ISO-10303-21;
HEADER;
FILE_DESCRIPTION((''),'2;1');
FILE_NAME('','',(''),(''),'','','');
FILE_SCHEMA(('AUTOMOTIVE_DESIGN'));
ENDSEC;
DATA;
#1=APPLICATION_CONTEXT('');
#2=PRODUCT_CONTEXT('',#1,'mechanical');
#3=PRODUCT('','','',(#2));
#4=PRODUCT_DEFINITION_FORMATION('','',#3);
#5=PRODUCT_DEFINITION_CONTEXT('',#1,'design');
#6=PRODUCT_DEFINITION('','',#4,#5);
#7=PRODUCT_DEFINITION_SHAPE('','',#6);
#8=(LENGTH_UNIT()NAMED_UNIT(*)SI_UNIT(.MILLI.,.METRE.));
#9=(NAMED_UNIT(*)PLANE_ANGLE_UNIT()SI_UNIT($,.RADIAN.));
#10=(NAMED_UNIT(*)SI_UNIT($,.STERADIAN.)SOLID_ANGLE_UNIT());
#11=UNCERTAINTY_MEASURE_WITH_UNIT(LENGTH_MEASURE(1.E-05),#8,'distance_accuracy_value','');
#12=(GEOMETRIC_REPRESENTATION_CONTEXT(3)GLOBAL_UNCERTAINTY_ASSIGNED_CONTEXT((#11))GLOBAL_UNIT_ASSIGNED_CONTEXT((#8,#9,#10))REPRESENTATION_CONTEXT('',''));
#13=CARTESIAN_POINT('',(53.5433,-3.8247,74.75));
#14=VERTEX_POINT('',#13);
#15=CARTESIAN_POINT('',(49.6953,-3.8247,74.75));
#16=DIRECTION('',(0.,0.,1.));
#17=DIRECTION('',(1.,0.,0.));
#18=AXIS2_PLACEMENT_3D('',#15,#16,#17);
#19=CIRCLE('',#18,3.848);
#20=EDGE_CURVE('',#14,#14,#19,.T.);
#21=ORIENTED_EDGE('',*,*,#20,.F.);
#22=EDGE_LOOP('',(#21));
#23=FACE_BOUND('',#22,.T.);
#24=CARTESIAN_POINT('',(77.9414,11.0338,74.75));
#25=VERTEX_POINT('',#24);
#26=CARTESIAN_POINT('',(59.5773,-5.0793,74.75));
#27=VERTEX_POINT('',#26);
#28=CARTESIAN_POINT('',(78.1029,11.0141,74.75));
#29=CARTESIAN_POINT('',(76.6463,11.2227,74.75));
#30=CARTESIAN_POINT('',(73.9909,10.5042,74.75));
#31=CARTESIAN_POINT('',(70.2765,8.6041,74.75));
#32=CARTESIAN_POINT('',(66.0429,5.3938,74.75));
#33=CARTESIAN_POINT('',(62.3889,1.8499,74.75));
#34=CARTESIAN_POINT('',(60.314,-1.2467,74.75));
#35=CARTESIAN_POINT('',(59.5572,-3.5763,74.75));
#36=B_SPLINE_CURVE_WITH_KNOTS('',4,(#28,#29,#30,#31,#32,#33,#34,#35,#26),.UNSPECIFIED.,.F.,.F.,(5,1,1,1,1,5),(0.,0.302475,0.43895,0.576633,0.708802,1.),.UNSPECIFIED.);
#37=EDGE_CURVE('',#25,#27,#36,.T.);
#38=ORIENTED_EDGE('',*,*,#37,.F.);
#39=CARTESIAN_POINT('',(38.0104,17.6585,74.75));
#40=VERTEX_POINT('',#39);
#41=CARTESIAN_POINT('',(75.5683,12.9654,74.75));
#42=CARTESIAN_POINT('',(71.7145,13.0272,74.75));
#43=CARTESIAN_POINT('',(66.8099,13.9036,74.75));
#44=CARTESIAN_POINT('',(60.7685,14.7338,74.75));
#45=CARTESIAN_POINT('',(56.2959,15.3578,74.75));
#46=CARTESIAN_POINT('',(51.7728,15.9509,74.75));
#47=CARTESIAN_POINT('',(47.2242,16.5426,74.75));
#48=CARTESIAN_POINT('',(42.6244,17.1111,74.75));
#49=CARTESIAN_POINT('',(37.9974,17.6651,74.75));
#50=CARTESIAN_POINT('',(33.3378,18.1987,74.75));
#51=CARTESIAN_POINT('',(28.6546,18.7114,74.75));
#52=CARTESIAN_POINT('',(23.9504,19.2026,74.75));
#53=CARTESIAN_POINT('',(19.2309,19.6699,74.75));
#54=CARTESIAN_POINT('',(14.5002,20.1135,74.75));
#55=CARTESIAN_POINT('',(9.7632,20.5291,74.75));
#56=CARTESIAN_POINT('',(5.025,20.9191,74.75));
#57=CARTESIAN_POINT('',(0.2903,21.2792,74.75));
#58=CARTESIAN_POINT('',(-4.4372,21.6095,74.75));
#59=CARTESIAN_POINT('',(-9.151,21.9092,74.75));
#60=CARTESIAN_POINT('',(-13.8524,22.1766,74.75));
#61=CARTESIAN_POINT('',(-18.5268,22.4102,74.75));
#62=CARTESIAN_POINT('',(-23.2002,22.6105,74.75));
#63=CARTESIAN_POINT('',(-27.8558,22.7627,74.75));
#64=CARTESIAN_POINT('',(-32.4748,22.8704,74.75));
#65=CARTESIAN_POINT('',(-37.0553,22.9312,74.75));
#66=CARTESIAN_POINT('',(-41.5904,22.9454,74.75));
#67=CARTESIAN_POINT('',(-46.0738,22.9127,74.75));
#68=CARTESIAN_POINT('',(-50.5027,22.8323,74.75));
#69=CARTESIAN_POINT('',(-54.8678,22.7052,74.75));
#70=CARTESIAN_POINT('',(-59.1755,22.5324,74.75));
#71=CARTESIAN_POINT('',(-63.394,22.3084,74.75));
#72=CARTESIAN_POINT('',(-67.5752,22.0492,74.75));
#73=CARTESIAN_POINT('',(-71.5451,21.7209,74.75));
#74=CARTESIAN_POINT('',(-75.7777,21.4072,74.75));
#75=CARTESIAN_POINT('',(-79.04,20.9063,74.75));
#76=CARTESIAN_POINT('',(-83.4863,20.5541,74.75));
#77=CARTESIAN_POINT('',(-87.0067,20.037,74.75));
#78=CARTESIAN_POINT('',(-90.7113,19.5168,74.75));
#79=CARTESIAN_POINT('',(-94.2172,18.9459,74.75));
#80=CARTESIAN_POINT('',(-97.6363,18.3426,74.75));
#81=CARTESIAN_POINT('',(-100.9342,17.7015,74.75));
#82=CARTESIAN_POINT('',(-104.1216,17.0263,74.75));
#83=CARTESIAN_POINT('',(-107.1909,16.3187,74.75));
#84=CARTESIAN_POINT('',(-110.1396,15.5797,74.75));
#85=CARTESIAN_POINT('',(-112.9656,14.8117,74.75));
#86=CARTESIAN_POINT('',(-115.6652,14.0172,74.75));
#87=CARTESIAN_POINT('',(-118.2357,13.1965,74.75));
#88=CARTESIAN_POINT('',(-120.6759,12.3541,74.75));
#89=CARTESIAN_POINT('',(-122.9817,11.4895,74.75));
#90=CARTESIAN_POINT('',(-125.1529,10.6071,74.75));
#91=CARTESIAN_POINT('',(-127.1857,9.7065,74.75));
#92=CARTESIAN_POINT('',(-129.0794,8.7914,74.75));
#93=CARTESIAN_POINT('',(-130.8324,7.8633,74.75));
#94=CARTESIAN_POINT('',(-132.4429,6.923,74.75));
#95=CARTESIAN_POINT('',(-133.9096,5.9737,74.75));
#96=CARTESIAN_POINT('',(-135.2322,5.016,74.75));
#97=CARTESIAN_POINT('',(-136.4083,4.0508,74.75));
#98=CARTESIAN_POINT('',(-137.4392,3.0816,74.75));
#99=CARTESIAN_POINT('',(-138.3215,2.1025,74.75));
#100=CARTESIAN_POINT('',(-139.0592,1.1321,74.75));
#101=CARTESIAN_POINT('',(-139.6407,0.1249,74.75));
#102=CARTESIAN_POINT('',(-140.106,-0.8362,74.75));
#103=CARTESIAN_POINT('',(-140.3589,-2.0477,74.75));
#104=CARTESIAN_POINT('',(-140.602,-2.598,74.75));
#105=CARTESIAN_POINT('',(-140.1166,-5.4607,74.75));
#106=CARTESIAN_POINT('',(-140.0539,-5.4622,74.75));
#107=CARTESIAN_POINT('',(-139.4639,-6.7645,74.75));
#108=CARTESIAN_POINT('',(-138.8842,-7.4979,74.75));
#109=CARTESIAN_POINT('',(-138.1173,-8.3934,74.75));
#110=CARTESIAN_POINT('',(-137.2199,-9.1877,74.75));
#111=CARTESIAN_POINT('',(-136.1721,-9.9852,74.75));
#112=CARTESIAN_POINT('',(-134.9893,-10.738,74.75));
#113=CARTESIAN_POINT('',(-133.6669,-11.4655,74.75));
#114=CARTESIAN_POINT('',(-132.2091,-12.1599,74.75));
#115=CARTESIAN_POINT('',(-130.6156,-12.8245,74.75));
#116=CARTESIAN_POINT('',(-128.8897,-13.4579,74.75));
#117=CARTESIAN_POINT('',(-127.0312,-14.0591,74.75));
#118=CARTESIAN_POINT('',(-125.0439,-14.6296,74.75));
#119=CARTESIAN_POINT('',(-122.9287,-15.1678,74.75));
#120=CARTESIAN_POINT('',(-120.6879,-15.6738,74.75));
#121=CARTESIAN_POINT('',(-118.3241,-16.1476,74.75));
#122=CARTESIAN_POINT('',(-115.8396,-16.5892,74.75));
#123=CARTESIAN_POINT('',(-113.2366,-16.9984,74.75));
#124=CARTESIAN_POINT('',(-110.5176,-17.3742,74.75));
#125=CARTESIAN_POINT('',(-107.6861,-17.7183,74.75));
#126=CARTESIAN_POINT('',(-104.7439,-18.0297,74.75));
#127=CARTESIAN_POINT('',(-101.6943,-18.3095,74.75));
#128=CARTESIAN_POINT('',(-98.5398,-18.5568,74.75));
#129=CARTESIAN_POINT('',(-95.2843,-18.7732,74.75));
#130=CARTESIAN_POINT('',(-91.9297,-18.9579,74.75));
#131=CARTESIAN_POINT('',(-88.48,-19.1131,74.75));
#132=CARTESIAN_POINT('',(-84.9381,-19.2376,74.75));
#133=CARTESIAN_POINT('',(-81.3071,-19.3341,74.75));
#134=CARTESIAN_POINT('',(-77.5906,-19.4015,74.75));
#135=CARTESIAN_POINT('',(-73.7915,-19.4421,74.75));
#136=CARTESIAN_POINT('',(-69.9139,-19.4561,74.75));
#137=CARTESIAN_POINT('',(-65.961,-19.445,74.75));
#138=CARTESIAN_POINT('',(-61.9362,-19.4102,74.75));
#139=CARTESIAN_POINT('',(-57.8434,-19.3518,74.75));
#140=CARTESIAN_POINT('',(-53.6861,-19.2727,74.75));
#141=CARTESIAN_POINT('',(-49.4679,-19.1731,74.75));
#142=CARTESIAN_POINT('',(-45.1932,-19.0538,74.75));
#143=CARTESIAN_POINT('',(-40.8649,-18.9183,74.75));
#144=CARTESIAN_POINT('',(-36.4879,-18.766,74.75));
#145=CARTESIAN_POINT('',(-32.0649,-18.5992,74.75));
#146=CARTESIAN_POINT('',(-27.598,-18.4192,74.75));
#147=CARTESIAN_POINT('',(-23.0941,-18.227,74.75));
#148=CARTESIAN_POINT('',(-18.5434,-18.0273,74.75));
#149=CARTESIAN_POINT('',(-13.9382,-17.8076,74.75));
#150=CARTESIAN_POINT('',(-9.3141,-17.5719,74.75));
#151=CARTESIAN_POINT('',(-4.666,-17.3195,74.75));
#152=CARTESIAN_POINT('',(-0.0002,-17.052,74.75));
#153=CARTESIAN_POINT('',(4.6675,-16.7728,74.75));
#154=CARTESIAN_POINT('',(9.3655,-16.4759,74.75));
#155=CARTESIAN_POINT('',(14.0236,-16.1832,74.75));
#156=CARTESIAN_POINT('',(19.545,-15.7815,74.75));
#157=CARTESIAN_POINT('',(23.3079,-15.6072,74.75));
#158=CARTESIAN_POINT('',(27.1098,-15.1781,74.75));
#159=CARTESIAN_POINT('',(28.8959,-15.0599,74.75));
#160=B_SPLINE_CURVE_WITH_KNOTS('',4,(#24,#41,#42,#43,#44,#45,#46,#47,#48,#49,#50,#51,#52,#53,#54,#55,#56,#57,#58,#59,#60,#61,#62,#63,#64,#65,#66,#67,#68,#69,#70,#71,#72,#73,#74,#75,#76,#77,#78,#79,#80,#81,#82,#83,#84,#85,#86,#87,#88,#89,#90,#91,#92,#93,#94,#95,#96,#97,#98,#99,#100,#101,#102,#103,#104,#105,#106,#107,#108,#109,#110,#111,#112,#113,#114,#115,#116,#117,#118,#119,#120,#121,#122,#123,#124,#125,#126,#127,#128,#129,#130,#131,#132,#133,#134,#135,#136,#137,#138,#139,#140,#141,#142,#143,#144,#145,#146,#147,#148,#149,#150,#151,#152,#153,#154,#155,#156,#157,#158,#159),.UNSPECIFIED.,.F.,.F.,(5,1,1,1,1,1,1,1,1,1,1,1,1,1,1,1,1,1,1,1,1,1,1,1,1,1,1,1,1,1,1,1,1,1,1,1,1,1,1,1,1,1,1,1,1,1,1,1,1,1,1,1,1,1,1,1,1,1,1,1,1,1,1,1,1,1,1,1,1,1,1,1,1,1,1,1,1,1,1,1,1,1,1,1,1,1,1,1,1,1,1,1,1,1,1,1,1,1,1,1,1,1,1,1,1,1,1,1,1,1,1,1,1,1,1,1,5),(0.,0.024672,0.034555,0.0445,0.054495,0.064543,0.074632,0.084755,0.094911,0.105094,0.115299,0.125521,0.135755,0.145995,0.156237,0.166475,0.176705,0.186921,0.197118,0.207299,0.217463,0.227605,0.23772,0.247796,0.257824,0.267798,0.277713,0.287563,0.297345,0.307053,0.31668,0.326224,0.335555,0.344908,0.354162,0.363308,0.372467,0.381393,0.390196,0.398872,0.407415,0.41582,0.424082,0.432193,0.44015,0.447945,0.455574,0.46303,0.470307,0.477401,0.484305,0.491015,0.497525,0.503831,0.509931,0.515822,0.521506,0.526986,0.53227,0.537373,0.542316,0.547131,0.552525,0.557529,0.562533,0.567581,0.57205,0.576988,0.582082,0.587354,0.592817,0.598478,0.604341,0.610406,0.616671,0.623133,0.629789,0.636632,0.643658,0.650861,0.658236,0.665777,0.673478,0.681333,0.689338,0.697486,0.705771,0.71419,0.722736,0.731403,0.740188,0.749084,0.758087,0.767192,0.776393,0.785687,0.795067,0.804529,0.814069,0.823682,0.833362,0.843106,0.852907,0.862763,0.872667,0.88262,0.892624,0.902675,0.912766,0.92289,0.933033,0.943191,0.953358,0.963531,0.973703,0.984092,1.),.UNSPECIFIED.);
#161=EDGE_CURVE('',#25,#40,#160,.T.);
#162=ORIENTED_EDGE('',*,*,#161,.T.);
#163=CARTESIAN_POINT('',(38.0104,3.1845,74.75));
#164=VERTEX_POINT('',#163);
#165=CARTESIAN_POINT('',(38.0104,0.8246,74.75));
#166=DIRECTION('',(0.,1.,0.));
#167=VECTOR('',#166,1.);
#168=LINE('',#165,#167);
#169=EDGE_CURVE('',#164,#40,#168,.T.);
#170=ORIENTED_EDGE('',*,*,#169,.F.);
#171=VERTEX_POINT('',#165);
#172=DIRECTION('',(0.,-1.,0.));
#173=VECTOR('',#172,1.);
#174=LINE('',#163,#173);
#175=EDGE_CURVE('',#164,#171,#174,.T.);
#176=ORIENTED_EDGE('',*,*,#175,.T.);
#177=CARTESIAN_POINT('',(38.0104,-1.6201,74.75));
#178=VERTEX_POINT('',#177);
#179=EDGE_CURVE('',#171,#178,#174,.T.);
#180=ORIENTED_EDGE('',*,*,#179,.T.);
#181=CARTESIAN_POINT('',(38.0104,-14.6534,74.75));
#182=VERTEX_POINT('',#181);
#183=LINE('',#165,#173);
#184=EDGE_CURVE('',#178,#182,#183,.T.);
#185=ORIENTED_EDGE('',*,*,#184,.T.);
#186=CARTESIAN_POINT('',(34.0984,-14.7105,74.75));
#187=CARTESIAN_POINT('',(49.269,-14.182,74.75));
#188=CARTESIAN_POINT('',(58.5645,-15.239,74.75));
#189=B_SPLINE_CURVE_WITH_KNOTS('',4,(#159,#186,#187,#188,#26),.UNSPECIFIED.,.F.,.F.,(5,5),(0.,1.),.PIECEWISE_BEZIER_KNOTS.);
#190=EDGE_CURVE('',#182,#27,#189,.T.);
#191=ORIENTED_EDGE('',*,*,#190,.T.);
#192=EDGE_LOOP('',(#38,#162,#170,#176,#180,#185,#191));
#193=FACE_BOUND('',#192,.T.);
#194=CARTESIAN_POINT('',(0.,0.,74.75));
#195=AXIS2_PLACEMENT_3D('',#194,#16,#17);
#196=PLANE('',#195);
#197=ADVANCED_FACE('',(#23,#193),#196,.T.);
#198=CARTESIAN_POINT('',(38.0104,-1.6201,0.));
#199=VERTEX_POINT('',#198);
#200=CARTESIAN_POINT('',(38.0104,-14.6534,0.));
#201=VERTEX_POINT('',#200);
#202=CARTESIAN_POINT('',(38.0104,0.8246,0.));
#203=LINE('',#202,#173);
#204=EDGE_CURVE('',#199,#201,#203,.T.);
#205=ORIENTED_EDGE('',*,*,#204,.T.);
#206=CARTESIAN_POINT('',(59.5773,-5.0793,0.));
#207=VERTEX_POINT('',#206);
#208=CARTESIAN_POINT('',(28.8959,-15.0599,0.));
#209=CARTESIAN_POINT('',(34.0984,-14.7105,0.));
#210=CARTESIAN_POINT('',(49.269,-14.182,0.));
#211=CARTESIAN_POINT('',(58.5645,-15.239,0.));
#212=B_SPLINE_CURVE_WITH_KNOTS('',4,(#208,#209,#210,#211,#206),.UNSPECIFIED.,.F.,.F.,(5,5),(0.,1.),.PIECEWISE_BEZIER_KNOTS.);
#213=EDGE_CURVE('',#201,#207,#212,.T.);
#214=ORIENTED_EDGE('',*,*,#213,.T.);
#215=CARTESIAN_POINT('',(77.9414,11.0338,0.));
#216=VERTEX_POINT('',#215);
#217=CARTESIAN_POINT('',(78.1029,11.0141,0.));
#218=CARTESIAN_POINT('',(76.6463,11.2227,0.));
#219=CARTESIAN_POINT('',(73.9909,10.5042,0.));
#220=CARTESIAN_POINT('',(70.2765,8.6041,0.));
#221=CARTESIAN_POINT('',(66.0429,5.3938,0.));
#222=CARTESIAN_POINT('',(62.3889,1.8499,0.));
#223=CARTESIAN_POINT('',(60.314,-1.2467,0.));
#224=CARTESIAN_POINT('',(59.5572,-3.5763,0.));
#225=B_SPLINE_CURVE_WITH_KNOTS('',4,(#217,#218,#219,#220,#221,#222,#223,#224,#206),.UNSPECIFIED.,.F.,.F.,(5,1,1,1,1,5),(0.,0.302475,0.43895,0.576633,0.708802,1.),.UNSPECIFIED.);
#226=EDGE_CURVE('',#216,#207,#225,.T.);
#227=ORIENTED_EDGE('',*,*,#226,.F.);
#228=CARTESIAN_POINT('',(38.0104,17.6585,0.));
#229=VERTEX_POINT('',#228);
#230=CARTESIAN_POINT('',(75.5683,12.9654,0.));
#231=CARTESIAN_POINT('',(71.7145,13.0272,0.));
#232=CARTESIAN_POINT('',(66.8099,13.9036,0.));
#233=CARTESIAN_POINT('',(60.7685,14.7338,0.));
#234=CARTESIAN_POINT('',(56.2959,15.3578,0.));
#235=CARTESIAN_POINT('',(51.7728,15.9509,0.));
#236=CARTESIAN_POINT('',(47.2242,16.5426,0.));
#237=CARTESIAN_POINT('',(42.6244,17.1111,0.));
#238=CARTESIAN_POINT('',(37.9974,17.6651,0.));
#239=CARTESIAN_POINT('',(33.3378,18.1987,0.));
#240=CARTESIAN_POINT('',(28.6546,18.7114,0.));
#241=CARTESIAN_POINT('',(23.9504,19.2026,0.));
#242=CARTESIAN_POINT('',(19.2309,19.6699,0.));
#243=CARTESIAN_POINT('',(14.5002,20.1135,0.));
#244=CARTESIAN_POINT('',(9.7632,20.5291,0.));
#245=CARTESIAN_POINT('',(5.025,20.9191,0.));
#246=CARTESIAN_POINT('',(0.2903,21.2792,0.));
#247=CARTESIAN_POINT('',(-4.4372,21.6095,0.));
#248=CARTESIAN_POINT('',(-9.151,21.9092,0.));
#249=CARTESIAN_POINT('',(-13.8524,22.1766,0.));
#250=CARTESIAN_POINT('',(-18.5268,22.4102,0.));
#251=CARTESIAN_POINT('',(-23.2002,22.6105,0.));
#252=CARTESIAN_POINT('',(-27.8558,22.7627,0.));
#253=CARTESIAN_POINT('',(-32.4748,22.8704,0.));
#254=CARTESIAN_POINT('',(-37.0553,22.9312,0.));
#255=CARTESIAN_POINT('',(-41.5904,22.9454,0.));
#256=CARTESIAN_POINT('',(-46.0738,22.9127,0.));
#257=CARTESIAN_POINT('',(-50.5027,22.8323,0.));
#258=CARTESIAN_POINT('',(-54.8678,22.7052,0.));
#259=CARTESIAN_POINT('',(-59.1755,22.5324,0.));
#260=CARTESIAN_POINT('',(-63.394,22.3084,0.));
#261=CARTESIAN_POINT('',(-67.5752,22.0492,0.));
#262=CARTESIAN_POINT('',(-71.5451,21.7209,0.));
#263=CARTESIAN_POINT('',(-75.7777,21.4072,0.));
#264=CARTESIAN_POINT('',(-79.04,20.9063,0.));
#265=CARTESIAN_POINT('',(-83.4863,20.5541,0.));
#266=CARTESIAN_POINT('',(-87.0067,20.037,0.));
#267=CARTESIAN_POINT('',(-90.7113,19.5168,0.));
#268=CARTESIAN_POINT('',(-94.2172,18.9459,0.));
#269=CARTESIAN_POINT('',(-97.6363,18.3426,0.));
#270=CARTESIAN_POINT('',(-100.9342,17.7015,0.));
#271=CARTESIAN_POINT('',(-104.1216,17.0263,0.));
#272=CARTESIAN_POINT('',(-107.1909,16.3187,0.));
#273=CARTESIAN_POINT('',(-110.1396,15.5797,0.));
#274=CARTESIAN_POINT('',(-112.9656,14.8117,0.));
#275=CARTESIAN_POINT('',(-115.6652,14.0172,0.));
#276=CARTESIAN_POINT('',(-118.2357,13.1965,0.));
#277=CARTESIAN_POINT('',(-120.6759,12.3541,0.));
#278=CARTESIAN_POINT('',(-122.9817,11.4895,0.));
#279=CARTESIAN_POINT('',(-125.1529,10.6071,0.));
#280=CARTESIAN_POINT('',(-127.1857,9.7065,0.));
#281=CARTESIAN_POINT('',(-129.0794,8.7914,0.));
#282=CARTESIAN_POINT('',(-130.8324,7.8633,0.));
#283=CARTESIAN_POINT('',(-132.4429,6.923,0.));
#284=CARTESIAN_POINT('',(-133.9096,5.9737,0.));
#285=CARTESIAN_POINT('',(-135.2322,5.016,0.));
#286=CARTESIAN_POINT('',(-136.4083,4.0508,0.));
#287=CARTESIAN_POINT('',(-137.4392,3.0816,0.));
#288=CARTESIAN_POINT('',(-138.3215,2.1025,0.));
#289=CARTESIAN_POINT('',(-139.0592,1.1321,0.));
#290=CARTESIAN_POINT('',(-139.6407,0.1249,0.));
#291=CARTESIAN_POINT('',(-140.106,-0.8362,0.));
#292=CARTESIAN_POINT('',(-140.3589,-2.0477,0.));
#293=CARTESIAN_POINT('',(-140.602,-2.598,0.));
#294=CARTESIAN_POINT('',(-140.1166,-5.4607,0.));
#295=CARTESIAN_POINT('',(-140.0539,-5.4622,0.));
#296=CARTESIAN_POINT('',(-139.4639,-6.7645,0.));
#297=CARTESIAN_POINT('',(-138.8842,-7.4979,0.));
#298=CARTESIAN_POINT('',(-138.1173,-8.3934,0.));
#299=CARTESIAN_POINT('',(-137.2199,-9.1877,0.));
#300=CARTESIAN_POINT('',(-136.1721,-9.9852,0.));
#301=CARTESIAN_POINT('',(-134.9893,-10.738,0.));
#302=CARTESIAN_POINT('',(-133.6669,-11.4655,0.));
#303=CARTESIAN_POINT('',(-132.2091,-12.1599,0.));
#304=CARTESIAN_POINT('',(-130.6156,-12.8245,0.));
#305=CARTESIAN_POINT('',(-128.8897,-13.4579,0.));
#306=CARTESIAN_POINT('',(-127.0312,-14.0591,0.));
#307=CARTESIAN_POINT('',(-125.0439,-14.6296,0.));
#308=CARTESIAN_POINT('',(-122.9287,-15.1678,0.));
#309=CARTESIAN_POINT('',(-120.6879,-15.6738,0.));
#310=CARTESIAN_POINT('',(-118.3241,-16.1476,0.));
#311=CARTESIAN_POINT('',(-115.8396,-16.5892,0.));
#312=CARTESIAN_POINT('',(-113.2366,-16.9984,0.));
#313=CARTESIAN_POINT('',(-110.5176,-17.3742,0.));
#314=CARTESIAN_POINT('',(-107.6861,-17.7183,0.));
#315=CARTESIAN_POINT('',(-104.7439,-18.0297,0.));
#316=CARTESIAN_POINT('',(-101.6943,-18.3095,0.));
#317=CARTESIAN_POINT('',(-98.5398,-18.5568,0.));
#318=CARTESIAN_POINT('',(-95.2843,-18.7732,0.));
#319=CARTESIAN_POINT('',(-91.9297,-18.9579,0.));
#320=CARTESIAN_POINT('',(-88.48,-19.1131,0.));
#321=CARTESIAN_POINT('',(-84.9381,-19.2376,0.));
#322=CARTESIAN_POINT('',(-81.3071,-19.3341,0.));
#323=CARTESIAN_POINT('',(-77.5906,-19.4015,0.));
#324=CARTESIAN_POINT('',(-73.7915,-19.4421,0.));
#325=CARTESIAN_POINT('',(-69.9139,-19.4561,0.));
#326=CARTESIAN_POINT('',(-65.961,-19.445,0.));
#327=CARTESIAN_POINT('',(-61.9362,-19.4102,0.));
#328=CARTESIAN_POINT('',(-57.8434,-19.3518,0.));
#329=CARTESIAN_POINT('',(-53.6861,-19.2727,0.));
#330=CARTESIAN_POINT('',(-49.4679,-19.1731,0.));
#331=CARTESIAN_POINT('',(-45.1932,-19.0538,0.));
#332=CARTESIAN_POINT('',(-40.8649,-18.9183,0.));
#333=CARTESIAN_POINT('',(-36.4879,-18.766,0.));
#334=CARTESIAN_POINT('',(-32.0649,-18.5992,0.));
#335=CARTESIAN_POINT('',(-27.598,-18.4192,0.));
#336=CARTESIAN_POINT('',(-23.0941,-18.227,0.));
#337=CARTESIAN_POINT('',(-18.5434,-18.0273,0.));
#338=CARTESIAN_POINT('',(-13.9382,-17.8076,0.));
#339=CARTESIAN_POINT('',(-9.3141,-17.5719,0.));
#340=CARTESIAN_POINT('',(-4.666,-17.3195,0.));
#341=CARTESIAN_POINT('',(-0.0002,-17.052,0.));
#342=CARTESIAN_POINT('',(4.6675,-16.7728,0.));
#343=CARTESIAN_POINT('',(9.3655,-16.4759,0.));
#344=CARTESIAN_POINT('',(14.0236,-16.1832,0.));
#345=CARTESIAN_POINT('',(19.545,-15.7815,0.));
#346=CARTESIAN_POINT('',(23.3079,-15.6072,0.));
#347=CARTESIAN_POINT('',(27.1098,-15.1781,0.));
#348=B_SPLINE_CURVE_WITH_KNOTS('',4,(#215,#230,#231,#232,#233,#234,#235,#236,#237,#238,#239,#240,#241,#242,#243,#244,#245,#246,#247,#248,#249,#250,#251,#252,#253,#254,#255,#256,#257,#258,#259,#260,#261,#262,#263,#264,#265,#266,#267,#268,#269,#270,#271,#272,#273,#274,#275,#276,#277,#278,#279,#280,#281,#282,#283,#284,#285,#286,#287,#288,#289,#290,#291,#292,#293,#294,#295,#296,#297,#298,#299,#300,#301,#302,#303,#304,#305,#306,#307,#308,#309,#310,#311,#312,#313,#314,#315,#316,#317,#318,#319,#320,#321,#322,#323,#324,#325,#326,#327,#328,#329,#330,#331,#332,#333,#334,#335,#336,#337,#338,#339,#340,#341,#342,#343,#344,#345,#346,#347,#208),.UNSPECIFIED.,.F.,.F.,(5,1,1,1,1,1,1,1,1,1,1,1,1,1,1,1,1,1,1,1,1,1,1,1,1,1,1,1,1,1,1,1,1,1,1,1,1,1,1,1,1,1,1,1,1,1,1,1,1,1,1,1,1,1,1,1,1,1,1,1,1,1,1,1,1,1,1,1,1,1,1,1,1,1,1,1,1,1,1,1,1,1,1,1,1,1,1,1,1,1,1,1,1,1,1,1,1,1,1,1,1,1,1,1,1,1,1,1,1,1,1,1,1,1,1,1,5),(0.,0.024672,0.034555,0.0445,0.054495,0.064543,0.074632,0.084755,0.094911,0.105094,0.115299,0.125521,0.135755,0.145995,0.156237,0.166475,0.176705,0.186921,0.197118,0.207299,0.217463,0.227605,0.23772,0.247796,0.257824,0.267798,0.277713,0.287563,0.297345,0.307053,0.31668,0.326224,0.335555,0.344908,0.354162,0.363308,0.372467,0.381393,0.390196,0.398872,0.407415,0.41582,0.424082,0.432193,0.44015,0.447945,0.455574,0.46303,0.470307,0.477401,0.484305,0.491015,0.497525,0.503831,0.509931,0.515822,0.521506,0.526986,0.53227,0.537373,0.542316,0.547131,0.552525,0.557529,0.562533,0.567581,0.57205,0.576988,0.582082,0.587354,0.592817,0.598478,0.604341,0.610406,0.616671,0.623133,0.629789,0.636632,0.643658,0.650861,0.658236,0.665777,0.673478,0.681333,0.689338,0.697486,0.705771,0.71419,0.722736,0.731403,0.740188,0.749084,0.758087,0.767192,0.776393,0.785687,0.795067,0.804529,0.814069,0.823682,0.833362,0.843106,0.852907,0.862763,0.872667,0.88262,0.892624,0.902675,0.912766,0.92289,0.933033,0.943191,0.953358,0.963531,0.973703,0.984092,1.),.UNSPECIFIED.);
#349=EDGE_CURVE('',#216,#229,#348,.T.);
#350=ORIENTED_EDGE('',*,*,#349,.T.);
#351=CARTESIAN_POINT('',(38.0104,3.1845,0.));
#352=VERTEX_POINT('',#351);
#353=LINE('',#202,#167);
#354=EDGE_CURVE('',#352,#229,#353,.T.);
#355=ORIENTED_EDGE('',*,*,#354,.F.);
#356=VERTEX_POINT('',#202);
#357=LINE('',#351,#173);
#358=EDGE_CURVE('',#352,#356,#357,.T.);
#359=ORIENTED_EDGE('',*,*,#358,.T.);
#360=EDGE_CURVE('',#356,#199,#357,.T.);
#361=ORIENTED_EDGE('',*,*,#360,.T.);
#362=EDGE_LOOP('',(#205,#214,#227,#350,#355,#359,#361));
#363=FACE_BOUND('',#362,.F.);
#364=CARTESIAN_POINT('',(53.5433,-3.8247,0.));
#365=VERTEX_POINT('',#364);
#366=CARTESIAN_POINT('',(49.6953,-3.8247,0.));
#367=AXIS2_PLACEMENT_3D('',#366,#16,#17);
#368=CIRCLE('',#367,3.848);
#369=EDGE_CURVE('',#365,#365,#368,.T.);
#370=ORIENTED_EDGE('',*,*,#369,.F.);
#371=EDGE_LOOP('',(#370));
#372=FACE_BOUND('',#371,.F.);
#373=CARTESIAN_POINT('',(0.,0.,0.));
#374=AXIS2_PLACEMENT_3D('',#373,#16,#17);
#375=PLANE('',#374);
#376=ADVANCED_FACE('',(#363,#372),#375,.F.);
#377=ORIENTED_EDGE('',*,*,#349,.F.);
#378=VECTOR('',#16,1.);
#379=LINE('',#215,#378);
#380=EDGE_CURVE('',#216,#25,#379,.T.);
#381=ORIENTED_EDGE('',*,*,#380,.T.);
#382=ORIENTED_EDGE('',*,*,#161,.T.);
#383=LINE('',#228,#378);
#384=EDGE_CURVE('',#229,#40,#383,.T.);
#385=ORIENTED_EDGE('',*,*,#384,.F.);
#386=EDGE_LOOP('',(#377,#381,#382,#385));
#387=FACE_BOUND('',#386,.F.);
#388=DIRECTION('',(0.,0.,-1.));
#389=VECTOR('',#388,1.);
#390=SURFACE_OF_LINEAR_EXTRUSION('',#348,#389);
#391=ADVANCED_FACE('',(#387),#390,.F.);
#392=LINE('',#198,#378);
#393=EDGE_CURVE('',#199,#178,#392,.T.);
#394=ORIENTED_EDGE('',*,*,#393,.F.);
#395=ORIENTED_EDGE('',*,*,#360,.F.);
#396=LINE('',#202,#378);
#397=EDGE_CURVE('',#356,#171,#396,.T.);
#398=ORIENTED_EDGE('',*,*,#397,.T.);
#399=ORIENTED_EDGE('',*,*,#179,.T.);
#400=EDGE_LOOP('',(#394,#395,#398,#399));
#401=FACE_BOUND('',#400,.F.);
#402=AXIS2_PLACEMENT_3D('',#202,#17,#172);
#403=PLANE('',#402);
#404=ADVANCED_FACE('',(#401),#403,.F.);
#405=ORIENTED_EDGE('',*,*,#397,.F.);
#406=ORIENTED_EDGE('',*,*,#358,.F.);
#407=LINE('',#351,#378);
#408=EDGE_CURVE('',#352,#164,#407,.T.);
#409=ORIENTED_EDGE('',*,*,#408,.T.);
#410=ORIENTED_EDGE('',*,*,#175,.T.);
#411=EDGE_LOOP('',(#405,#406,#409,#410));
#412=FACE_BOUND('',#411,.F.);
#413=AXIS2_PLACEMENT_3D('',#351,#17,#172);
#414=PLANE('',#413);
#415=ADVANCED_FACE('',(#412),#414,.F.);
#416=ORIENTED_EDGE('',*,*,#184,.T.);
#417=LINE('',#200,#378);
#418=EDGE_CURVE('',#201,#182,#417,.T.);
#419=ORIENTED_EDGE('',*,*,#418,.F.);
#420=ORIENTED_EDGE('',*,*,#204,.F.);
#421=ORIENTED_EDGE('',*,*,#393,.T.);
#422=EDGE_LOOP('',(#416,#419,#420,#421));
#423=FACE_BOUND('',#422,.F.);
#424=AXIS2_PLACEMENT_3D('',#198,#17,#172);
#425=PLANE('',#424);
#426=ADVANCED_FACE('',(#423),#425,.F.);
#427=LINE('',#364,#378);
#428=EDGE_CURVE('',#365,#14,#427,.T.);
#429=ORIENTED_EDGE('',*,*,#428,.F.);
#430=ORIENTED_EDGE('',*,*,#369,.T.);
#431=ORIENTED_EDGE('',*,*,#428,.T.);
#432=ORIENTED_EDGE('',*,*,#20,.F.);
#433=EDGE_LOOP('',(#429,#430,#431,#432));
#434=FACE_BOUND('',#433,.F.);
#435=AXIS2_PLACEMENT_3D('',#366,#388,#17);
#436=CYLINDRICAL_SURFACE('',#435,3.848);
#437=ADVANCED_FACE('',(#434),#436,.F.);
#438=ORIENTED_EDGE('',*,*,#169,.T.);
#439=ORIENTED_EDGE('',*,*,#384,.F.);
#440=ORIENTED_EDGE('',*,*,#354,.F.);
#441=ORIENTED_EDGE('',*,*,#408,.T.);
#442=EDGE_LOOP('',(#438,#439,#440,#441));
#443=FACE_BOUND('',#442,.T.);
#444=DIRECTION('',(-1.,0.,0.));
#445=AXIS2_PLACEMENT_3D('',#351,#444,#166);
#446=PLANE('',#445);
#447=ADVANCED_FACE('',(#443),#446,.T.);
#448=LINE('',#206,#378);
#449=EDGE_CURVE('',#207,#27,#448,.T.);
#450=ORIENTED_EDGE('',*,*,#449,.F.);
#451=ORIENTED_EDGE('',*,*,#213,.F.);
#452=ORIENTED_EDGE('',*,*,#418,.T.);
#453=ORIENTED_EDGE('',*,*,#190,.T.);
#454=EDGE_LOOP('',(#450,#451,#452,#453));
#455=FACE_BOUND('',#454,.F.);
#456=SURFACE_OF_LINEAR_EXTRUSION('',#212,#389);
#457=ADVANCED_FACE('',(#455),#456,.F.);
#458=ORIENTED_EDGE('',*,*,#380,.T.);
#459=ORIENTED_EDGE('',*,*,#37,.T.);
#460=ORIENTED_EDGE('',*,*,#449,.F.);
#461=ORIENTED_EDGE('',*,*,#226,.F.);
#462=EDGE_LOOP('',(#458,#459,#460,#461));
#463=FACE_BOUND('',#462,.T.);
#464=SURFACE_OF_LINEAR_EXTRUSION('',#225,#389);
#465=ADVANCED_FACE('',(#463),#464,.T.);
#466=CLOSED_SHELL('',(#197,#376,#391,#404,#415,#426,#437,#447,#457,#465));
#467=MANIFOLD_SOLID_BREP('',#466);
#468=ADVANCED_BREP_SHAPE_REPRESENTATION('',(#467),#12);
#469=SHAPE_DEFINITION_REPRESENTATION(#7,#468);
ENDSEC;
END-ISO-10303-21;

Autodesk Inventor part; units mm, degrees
ref_plane "YZ Plane" through (0, 0, 0) normal (1, 0, 0) x (0, 1, 0)
ref_plane "XZ Plane" through (0, 0, 0) normal (0, 1, 0) x (-1, 0, 0)
ref_plane "XY Plane" through (0, 0, 0) normal (0, 0, 1) x (1, 0, 0)
sketch "Sketch3" plane through (0, 0, 0) normal (0, 0, 1) x (1, 0, 0)
  line L0 (-80.5781, 0.8246) -> (-80.5781, 20.7988) construction
  circle A0 centre (-80.5781, 0.8246) radius 13.481
  line L1 (-53.7179, 12.5571) -> (-53.7179, -10.9927)
  arc A1 (-53.7179, -10.9927) -> (-51.5054, -12.9814) centre (-51.7179, -10.9927) ccw
  arc A2 (-51.5054, 14.5458) -> (-53.7179, 12.5571) centre (-51.7179, 12.5571) ccw
  line L2 (36.2229, -3.6088) -> (-51.5054, -12.9814)
  line L3 (38.0104, 3.1845) -> (38.0104, -1.6201)
  line L4 (-80.5781, 0.8246) -> (49.5525, 0.8246) construction
  circle A3 centre (49.6953, -3.8247) radius 3.848
  line L5 (59.6953, 14.884) -> (59.6953, -12.7998) construction
  spline S0 degree 4 poles (77.9414, 11.0338) (75.5683, 12.9654) (71.7145, 13.0272) (66.8099, 13.9036) (60.7685, 14.7338) (56.2959, 15.3578) (51.7728, 15.9509) (47.2242, 16.5426) (42.6244, 17.1111) (37.9974, 17.6651) (33.3378, 18.1987) (28.6546, 18.7114) (23.9504, 19.2026) (19.2309, 19.6699) (14.5002, 20.1135) (9.7632, 20.5291) (5.025, 20.9191) (0.2903, 21.2792) (-4.4372, 21.6095) (-9.151, 21.9092) (-13.8524, 22.1766) (-18.5268, 22.4102) (-23.2002, 22.6105) (-27.8558, 22.7627) (-32.4748, 22.8704) (-37.0553, 22.9312) (-41.5904, 22.9454) (-46.0738, 22.9127) (-50.5027, 22.8323) (-54.8678, 22.7052) (-59.1755, 22.5324) (-63.394, 22.3084) (-67.5752, 22.0492) (-71.5451, 21.7209) (-75.7777, 21.4072) (-79.04, 20.9063) (-83.4863, 20.5541) (-87.0067, 20.037) (-90.7113, 19.5168) (-94.2172, 18.9459) (-97.6363, 18.3426) (-100.9342, 17.7015) (-104.1216, 17.0263) (-107.1909, 16.3187) (-110.1396, 15.5797) (-112.9656, 14.8117) (-115.6652, 14.0172) (-118.2357, 13.1965) (-120.6759, 12.3541) (-122.9817, 11.4895) (-125.1529, 10.6071) (-127.1857, 9.7065) (-129.0794, 8.7914) (-130.8324, 7.8633) (-132.4429, 6.923) (-133.9096, 5.9737) (-135.2322, 5.016) (-136.4083, 4.0508) (-137.4392, 3.0816) (-138.3215, 2.1025) (-139.0592, 1.1321) (-139.6407, 0.1249) (-140.106, -0.8362) (-140.3589, -2.0477) (-140.602, -2.598) (-140.1166, -5.4607) (-140.0539, -5.4622) (-139.4639, -6.7645) (-138.8842, -7.4979) (-138.1173, -8.3934) (-137.2199, -9.1877) (-136.1721, -9.9852) (-134.9893, -10.738) (-133.6669, -11.4655) (-132.2091, -12.1599) (-130.6156, -12.8245) (-128.8897, -13.4579) (-127.0312, -14.0591) (-125.0439, -14.6296) (-122.9287, -15.1678) (-120.6879, -15.6738) (-118.3241, -16.1476) (-115.8396, -16.5892) (-113.2366, -16.9984) (-110.5176, -17.3742) (-107.6861, -17.7183) (-104.7439, -18.0297) (-101.6943, -18.3095) (-98.5398, -18.5568) (-95.2843, -18.7732) (-91.9297, -18.9579) (-88.48, -19.1131) (-84.9381, -19.2376) (-81.3071, -19.3341) (-77.5906, -19.4015) (-73.7915, -19.4421) (-69.9139, -19.4561) (-65.961, -19.445) (-61.9362, -19.4102) (-57.8434, -19.3518) (-53.6861, -19.2727) (-49.4679, -19.1731) (-45.1932, -19.0538) (-40.8649, -18.9183) (-36.4879, -18.766) (-32.0649, -18.5992) (-27.598, -18.4192) (-23.0941, -18.227) (-18.5434, -18.0273) (-13.9382, -17.8076) (-9.3141, -17.5719) (-4.666, -17.3195) (-0.0002, -17.052) (4.6675, -16.7728) (9.3655, -16.4759) (14.0236, -16.1832) (19.545, -15.7815) (23.3079, -15.6072) (27.1098, -15.1781) (28.8959, -15.0599) knots 0 0 0 0 0 0.024672 0.034555 0.0445 0.054495 0.064543 0.074632 0.084755 0.094911 0.105094 0.115299 0.125521 0.135755 0.145995 0.156237 0.166475 0.176705 0.186921 0.197118 0.207299 0.217463 0.227605 0.23772 0.247796 0.257824 0.267798 0.277713 0.287563 0.297345 0.307053 0.31668 0.326224 0.335555 0.344908 0.354162 0.363308 0.372467 0.381393 0.390196 0.398872 0.407415 0.41582 0.424082 0.432193 0.44015 0.447945 0.455574 0.46303 0.470307 0.477401 0.484305 0.491015 0.497525 0.503831 0.509931 0.515822 0.521506 0.526986 0.53227 0.537373 0.542316 0.547131 0.552525 0.557529 0.562533 0.567581 0.57205 0.576988 0.582082 0.587354 0.592817 0.598478 0.604341 0.610406 0.616671 0.623133 0.629789 0.636632 0.643658 0.650861 0.658236 0.665777 0.673478 0.681333 0.689338 0.697486 0.705771 0.71419 0.722736 0.731403 0.740188 0.749084 0.758087 0.767192 0.776393 0.785687 0.795067 0.804529 0.814069 0.823682 0.833362 0.843106 0.852907 0.862763 0.872667 0.88262 0.892624 0.902675 0.912766 0.92289 0.933033 0.943191 0.953358 0.963531 0.973703 0.984092 1 1 1 1 1
  line L6 (7.5013, -16.4763) -> (50.2906, -13.6435) construction
  arc A4 (44.8353, -17.2546) -> (13.385, -19.3367) centre (31.5327, -54.8885) ccw construction
  line L7 (159.6953, -3.8066) -> (59.6953, -3.8066) construction
  line L8 (-51.5054, 14.5458) -> (36.2229, 5.1732)
  arc A5 (36.2229, -3.6088) -> (38.0104, -1.6201) centre (36.0104, -1.6201) ccw
  arc A6 (38.0104, 3.1845) -> (36.2229, 5.1732) centre (36.0104, 3.1845) ccw
  spline S1 degree 4 poles (78.1029, 11.0141) (76.6463, 11.2227) (73.9909, 10.5042) (70.2765, 8.6041) (66.0429, 5.3938) (62.3889, 1.8499) (60.314, -1.2467) (59.5572, -3.5763) (59.5773, -5.0793) knots 0 0 0 0 0 0.302475 0.43895 0.576633 0.708802 1 1 1 1 1
  spline S2 degree 4 poles (28.8959, -15.0599) (34.0984, -14.7105) (49.269, -14.182) (58.5645, -15.239) (59.5773, -5.0793) knots 0 0 0 0 0 1 1 1 1 1
  line L9 (28.8959, -15.0599) -> (34.0984, -14.7105) construction
  line L10 (34.0984, -14.7105) -> (49.269, -14.182) construction
  line L11 (49.269, -14.182) -> (58.5645, -15.239) construction
  line L12 (58.5645, -15.239) -> (59.5773, -5.0793) construction
  line L13 (-140.4646, -2.8394) -> (159.4818, -3.8173) construction
  line L14 (-132.0856, 0.6333) -> (-132.0856, -6.3667)
  line L15 (-132.0856, -6.3667) -> (-110.3816, -12.3574)
  line L16 (-110.3816, -12.3574) -> (-104.797, -12.3574)
  line L17 (-104.797, -12.3574) -> (-104.797, -18.0156)
  line L18 (-132.0856, 0.6333) -> (-110.3816, 10.553)
  line L19 (-110.3816, 10.553) -> (-104.1736, 10.553)
  line L20 (-104.1736, 10.553) -> (-104.1736, 17.0026)
  line L21 (38.0104, 0.8246) -> (38.0104, -14.6534)
  line L22 (38.0104, 0.8246) -> (38.0104, 17.6585)
  point P0 (0, 0)
  point P1 (17.6589, 23.5628)
  point P2 (75.883, 10.8572)
  point P3 (72.8647, 9.7686)
  point P4 (69.4179, 7.8149)
  point P5 (66.0452, 5.2617)
  point P6 (63.1887, 2.4463)
  point P7 (61.1228, -0.3317)
  point P8 (59.9357, -2.8689)
  point P9 (-160.0931, -3.8671)
  point P10 (28.8959, -15.0599)
  point P11 (69.5533, 13.4647)
  point P12 (65.1899, 14.1023)
  point P13 (60.7936, 14.7318)
  point P14 (56.3207, 15.3468)
  point P15 (51.7945, 15.947)
  point P16 (47.2398, 16.5346)
  point P17 (42.6414, 17.1053)
  point P18 (33.3491, 18.1925)
  point P19 (28.6632, 18.7055)
  point P20 (23.9568, 19.1966)
  point P21 (19.2348, 19.6643)
  point P22 (14.5017, 20.1074)
  point P23 (9.7623, 20.5238)
  point P24 (5.0217, 20.9132)
  point P25 (0.2844, 21.2735)
  point P26 (-4.4451, 21.6038)
  point P27 (-9.1614, 21.9032)
  point P28 (-13.86, 22.1702)
  point P29 (-18.5361, 22.4036)
  point P30 (-23.211, 22.601)
  point P31 (-27.8721, 22.754)
  point P32 (-32.4966, 22.8611)
  point P33 (-37.0797, 22.9217)
  point P34 (-41.6169, 22.9356)
  point P35 (-46.1028, 22.9023)
  point P36 (-50.5329, 22.8216)
  point P37 (-54.9021, 22.6941)
  point P38 (-59.2065, 22.5195)
  point P39 (-63.4406, 22.2977)
  point P40 (-67.6008, 22.0302)
  point P41 (-71.6806, 21.7165)
  point P42 (-75.6814, 21.3591)
  point P43 (-79.1834, 20.9458)
  point P44 (-83.4048, 20.5095)
  point P45 (-87.1309, 20.023)
  point P46 (-90.7527, 19.494)
  point P47 (-94.2725, 18.9266)
  point P48 (-97.6845, 18.3211)
  point P49 (-100.9861, 17.6791)
  point P50 (-107.2438, 16.2934)
  point P51 (-110.1931, 15.553)
  point P52 (-113.0194, 14.7835)
  point P53 (-115.7191, 13.987)
  point P54 (-118.2898, 13.165)
  point P55 (-120.7294, 12.3201)
  point P56 (-123.0349, 11.454)
  point P57 (-125.2048, 10.569)
  point P58 (-127.2364, 9.6666)
  point P59 (-129.1282, 8.7491)
  point P60 (-130.8786, 7.8185)
  point P61 (-132.486, 6.8762)
  point P62 (-133.9488, 5.9245)
  point P63 (-135.2661, 4.9648)
  point P64 (-136.4363, 3.9987)
  point P65 (-137.4592, 3.0275)
  point P66 (-138.3336, 2.0531)
  point P67 (-139.0591, 1.0763)
  point P68 (-139.6352, 0.0983)
  point P69 (-140.0613, -0.8802)
  point P70 (-140.338, -1.8576)
  point P71 (-140.1239, -5.2398)
  point P72 (-139.9547, -5.7022)
  point P73 (-139.492, -6.6066)
  point P74 (-138.8844, -7.4823)
  point P75 (-138.1328, -8.3292)
  point P76 (-137.2384, -9.147)
  point P77 (-136.202, -9.9355)
  point P78 (-135.0249, -10.6943)
  point P79 (-133.7085, -11.4228)
  point P80 (-132.2548, -12.1206)
  point P81 (-130.6648, -12.7879)
  point P82 (-128.941, -13.4239)
  point P83 (-127.0846, -14.0282)
  point P84 (-125.0983, -14.6009)
  point P85 (-122.9839, -15.1415)
  point P86 (-120.7435, -15.6497)
  point P87 (-118.3798, -16.1256)
  point P88 (-115.8952, -16.569)
  point P89 (-113.2918, -16.9797)
  point P90 (-110.5723, -17.3574)
  point P91 (-107.74, -17.7027)
  point P92 (-101.7463, -18.2964)
  point P93 (-98.5909, -18.5451)
  point P94 (-95.3341, -18.7623)
  point P95 (-91.9783, -18.9484)
  point P96 (-88.5271, -19.1041)
  point P97 (-84.9838, -19.2298)
  point P98 (-81.3514, -19.3267)
  point P99 (-77.6332, -19.3951)
  point P100 (-73.8324, -19.4362)
  point P101 (-69.9531, -19.4509)
  point P102 (-65.9985, -19.4404)
  point P103 (-61.9719, -19.4059)
  point P104 (-57.8772, -19.3483)
  point P105 (-53.718, -19.2694)
  point P106 (-49.4979, -19.1701)
  point P107 (-45.2211, -19.0516)
  point P108 (-40.8909, -18.916)
  point P109 (-36.5118, -18.7642)
  point P110 (-32.0871, -18.5977)
  point P111 (-27.6213, -18.418)
  point P112 (-23.1183, -18.2269)
  point P113 (-18.5646, -18.0247)
  point P114 (-13.9566, -17.8054)
  point P115 (-9.3252, -17.5693)
  point P116 (-4.674, -17.317)
  point P117 (-0.0078, -17.05)
  point P118 (4.6686, -16.7695)
  point P119 (9.3513, -16.477)
  point P120 (14.0352, -16.1731)
  point P121 (18.7161, -15.8596)
  point P122 (23.3889, -15.5371)
  point P123 (78.0825, 12.164)
  point P124 (159.2574, -3.8401)
  point P125 (158.8836, -3.8779)
  point P126 (158.3607, -3.9307)
  point P127 (157.6896, -3.9985)
  point P128 (156.8706, -4.081)
  point P129 (155.9046, -4.1779)
  point P130 (154.7931, -4.2892)
  point P131 (153.5367, -4.4143)
  point P132 (152.1372, -4.5532)
  point P133 (150.5955, -4.7056)
  point P134 (148.914, -4.8712)
  point P135 (147.0936, -5.0494)
  point P136 (145.137, -5.2399)
  point P137 (143.0457, -5.4421)
  point P138 (140.8221, -5.6563)
  point P139 (138.4686, -5.8813)
  point P140 (135.9876, -6.1174)
  point P141 (133.3815, -6.3634)
  point P142 (130.6533, -6.6196)
  point P143 (127.8054, -6.8851)
  point P144 (124.8414, -7.1596)
  point P145 (121.7634, -7.4428)
  point P146 (118.5756, -7.7341)
  point P147 (115.2804, -8.0332)
  point P148 (111.8817, -8.3395)
  point P149 (108.3828, -8.6527)
  point P150 (104.787, -8.9722)
  point P151 (101.0985, -9.2974)
  point P152 (97.3206, -9.6283)
  point P153 (93.4572, -9.9643)
  point P154 (89.5122, -10.3048)
  point P155 (85.4898, -10.6492)
  point P156 (81.3936, -10.9969)
  point P157 (77.2284, -11.3479)
  point P158 (72.9975, -11.701)
  point P159 (68.7057, -12.0556)
  point P160 (64.3572, -12.4117)
  point P161 (59.9559, -12.7678)
  point P162 (55.5069, -13.1239)
  point P163 (51.0138, -13.4788)
  point P164 (46.4817, -13.8316)
  point P165 (41.9148, -14.182)
  point P166 (35.7035, -14.3277)
  point P167 (32.6946, -14.8708)
  point P168 (82.2459, 11.5043)
  point P169 (86.3364, 10.8401)
  point P170 (90.3495, 10.1732)
  point P171 (94.2816, 9.5051)
  point P172 (98.1288, 8.837)
  point P173 (101.8872, 8.171)
  point P174 (105.5538, 7.5086)
  point P175 (109.1244, 6.8507)
  point P176 (112.596, 6.1997)
  point P177 (115.9653, 5.5565)
  point P178 (119.2287, 4.9229)
  point P179 (122.3835, 4.3007)
  point P180 (125.4264, 3.6911)
  point P181 (128.3547, 3.0956)
  point P182 (131.1654, 2.5157)
  point P183 (133.8561, 1.9532)
  point P184 (136.4244, 1.4093)
  point P185 (138.8676, 0.8855)
  point P186 (141.1833, 0.383)
  point P187 (143.3697, -0.0964)
  point P188 (145.4247, -0.5518)
  point P189 (147.3462, -0.9817)
  point P190 (149.1327, -1.3852)
  point P191 (150.7821, -1.7608)
  point P192 (152.2935, -2.1073)
  point P193 (153.6651, -2.4241)
  point P194 (154.8954, -2.7103)
  point P195 (155.9838, -2.9647)
  point P196 (156.9291, -3.187)
  point P197 (157.7307, -3.376)
  point P198 (158.3871, -3.5317)
  point P199 (158.8986, -3.6529)
  dimension "d3" = 26.962
  dimension "d6" = 7.696
  dimension "d7" = 110
  dimension "d8" = 100
  dimension "d9" = 2
  dimension "d11" = 4.6493
  dimension "d25" = 7
  dimension "d26" = 3.5
  dimension "d27" = 8.379
  dimension "d28" = 30.083
  dimension "d29" = 5
  dimension "d30" = 5
  dimension "d31" = 59.8865
extrude "Extrusion3" add sketch "Sketch3" along normal blind 74.75 contours L22 S0 S1 S2 L21 L3
properties part number "4P.01.01.11-TW-v1-WingRibWFlapSingle" material "Polyurethane Foam"
